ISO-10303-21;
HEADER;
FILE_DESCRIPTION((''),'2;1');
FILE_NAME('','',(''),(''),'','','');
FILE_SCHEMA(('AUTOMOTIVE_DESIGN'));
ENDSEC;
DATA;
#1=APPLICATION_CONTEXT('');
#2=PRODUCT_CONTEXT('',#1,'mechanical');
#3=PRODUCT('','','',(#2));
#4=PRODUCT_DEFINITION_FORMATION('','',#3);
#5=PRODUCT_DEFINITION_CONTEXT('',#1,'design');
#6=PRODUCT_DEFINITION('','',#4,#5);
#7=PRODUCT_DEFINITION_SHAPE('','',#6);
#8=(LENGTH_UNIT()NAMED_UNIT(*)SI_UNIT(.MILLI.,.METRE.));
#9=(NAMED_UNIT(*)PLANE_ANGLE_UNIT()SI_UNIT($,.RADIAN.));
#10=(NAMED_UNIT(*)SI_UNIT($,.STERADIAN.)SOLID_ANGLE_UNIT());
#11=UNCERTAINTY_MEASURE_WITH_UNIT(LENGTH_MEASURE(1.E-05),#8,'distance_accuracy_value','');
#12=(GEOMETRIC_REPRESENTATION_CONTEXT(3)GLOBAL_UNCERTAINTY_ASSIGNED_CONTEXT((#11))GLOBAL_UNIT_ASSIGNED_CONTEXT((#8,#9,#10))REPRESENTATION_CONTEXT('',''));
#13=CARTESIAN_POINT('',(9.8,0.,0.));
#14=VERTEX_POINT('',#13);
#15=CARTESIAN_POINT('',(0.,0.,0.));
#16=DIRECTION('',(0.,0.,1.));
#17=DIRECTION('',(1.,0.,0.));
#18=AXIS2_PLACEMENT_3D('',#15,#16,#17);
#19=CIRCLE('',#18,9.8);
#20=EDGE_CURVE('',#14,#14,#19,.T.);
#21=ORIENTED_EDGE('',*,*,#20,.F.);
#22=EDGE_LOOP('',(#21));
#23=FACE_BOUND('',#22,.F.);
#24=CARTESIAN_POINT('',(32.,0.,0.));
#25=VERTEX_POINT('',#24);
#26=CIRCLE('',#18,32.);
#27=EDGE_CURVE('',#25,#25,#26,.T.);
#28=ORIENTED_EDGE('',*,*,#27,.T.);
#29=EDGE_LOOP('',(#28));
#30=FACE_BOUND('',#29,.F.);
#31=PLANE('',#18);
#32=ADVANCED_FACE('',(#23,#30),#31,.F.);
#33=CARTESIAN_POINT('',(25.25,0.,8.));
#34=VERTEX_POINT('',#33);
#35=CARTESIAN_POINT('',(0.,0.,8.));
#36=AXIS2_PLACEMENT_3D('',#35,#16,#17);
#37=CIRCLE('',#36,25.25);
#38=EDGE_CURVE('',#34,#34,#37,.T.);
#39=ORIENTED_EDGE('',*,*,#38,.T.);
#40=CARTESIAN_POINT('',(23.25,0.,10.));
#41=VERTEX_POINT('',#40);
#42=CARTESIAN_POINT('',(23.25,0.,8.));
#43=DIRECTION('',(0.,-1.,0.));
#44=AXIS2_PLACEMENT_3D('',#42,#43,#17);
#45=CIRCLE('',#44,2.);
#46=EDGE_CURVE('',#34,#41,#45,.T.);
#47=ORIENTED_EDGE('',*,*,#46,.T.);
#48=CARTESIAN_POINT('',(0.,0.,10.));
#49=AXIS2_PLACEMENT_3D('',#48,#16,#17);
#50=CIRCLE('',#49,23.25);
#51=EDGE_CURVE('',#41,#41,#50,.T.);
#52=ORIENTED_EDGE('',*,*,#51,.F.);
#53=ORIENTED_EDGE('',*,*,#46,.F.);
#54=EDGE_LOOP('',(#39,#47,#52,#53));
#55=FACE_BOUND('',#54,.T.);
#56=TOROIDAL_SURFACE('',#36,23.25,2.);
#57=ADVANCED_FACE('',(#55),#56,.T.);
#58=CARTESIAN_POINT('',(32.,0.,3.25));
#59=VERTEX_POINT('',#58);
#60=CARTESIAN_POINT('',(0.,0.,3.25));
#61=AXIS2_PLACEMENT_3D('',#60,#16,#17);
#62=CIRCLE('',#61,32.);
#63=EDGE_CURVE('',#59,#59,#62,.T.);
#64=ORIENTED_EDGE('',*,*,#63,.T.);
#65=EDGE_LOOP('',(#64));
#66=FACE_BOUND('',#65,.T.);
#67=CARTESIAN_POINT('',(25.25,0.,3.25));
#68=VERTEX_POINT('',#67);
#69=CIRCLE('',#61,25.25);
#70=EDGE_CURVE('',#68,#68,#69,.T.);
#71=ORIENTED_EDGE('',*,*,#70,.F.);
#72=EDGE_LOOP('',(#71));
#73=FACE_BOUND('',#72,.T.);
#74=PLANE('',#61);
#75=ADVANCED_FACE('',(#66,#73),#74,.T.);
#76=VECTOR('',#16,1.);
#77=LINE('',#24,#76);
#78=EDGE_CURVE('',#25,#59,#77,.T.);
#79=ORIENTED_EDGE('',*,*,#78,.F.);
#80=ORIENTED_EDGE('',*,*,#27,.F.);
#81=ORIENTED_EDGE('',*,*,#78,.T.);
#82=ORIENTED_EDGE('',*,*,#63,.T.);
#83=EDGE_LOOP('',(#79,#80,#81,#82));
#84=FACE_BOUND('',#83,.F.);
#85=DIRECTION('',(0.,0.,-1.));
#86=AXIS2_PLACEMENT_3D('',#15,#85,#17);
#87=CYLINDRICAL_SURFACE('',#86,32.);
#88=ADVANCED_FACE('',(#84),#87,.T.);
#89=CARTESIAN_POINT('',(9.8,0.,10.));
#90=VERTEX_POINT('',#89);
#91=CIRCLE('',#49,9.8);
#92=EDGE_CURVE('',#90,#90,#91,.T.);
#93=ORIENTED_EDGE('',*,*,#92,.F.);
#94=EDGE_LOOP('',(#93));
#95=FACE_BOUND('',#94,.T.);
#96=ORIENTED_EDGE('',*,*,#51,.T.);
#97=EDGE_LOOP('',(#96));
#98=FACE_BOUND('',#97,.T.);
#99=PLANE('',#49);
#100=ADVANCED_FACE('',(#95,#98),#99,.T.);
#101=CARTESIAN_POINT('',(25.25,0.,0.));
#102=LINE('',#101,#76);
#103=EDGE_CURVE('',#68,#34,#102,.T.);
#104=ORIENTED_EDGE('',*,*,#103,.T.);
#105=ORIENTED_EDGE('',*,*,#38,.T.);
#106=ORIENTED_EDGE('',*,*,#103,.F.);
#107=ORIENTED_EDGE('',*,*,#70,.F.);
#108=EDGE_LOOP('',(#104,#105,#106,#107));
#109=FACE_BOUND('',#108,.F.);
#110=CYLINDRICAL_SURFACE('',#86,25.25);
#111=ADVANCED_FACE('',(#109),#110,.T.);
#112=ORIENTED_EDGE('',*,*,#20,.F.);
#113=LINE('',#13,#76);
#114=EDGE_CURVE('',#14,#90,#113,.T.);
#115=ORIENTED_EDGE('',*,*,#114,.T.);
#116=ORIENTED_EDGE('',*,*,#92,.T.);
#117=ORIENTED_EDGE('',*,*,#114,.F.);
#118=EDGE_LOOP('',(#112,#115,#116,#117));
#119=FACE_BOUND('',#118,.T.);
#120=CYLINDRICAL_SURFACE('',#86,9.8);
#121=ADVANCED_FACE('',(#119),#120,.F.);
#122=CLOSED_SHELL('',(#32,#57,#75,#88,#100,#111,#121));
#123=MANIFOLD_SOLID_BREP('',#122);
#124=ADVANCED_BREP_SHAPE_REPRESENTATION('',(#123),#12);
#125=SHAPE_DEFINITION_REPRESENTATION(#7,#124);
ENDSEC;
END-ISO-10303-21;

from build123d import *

# Parameters (mm, degrees)
F0_R     = 25.25
F0_R_2   = 12
F0_R_3   = 9.8
F1_DEPTH = 10
F0_R_4   = 32
F2_DEPTH = 3.25
F3_R     = 2


# Not quite as in the source:
# - a feature names something its author has since deleted; it is built from what else it names


with BuildPart() as f1:
    # F0 (on Top) → F1 (new body)
    with BuildSketch(Plane.XY):
        Circle(F0_R)
        Circle(F0_R_2, mode=Mode.SUBTRACT)
        Circle(F0_R_2)
        Circle(F0_R_3, mode=Mode.SUBTRACT)
    extrude(amount=F1_DEPTH)

    # F0 (on Top) → F2 (join)
    with BuildSketch(Plane.XY):
        Circle(F0_R_4)
        Circle(F0_R, mode=Mode.SUBTRACT)
    extrude(amount=F2_DEPTH)

    # F3
    f3_edges = [f1.edges().sort_by_distance(p)[0] for p in [
        (-25.25, 0, 10),
    ]]
    fillet(f3_edges, radius=F3_R)


solid = f1.part
